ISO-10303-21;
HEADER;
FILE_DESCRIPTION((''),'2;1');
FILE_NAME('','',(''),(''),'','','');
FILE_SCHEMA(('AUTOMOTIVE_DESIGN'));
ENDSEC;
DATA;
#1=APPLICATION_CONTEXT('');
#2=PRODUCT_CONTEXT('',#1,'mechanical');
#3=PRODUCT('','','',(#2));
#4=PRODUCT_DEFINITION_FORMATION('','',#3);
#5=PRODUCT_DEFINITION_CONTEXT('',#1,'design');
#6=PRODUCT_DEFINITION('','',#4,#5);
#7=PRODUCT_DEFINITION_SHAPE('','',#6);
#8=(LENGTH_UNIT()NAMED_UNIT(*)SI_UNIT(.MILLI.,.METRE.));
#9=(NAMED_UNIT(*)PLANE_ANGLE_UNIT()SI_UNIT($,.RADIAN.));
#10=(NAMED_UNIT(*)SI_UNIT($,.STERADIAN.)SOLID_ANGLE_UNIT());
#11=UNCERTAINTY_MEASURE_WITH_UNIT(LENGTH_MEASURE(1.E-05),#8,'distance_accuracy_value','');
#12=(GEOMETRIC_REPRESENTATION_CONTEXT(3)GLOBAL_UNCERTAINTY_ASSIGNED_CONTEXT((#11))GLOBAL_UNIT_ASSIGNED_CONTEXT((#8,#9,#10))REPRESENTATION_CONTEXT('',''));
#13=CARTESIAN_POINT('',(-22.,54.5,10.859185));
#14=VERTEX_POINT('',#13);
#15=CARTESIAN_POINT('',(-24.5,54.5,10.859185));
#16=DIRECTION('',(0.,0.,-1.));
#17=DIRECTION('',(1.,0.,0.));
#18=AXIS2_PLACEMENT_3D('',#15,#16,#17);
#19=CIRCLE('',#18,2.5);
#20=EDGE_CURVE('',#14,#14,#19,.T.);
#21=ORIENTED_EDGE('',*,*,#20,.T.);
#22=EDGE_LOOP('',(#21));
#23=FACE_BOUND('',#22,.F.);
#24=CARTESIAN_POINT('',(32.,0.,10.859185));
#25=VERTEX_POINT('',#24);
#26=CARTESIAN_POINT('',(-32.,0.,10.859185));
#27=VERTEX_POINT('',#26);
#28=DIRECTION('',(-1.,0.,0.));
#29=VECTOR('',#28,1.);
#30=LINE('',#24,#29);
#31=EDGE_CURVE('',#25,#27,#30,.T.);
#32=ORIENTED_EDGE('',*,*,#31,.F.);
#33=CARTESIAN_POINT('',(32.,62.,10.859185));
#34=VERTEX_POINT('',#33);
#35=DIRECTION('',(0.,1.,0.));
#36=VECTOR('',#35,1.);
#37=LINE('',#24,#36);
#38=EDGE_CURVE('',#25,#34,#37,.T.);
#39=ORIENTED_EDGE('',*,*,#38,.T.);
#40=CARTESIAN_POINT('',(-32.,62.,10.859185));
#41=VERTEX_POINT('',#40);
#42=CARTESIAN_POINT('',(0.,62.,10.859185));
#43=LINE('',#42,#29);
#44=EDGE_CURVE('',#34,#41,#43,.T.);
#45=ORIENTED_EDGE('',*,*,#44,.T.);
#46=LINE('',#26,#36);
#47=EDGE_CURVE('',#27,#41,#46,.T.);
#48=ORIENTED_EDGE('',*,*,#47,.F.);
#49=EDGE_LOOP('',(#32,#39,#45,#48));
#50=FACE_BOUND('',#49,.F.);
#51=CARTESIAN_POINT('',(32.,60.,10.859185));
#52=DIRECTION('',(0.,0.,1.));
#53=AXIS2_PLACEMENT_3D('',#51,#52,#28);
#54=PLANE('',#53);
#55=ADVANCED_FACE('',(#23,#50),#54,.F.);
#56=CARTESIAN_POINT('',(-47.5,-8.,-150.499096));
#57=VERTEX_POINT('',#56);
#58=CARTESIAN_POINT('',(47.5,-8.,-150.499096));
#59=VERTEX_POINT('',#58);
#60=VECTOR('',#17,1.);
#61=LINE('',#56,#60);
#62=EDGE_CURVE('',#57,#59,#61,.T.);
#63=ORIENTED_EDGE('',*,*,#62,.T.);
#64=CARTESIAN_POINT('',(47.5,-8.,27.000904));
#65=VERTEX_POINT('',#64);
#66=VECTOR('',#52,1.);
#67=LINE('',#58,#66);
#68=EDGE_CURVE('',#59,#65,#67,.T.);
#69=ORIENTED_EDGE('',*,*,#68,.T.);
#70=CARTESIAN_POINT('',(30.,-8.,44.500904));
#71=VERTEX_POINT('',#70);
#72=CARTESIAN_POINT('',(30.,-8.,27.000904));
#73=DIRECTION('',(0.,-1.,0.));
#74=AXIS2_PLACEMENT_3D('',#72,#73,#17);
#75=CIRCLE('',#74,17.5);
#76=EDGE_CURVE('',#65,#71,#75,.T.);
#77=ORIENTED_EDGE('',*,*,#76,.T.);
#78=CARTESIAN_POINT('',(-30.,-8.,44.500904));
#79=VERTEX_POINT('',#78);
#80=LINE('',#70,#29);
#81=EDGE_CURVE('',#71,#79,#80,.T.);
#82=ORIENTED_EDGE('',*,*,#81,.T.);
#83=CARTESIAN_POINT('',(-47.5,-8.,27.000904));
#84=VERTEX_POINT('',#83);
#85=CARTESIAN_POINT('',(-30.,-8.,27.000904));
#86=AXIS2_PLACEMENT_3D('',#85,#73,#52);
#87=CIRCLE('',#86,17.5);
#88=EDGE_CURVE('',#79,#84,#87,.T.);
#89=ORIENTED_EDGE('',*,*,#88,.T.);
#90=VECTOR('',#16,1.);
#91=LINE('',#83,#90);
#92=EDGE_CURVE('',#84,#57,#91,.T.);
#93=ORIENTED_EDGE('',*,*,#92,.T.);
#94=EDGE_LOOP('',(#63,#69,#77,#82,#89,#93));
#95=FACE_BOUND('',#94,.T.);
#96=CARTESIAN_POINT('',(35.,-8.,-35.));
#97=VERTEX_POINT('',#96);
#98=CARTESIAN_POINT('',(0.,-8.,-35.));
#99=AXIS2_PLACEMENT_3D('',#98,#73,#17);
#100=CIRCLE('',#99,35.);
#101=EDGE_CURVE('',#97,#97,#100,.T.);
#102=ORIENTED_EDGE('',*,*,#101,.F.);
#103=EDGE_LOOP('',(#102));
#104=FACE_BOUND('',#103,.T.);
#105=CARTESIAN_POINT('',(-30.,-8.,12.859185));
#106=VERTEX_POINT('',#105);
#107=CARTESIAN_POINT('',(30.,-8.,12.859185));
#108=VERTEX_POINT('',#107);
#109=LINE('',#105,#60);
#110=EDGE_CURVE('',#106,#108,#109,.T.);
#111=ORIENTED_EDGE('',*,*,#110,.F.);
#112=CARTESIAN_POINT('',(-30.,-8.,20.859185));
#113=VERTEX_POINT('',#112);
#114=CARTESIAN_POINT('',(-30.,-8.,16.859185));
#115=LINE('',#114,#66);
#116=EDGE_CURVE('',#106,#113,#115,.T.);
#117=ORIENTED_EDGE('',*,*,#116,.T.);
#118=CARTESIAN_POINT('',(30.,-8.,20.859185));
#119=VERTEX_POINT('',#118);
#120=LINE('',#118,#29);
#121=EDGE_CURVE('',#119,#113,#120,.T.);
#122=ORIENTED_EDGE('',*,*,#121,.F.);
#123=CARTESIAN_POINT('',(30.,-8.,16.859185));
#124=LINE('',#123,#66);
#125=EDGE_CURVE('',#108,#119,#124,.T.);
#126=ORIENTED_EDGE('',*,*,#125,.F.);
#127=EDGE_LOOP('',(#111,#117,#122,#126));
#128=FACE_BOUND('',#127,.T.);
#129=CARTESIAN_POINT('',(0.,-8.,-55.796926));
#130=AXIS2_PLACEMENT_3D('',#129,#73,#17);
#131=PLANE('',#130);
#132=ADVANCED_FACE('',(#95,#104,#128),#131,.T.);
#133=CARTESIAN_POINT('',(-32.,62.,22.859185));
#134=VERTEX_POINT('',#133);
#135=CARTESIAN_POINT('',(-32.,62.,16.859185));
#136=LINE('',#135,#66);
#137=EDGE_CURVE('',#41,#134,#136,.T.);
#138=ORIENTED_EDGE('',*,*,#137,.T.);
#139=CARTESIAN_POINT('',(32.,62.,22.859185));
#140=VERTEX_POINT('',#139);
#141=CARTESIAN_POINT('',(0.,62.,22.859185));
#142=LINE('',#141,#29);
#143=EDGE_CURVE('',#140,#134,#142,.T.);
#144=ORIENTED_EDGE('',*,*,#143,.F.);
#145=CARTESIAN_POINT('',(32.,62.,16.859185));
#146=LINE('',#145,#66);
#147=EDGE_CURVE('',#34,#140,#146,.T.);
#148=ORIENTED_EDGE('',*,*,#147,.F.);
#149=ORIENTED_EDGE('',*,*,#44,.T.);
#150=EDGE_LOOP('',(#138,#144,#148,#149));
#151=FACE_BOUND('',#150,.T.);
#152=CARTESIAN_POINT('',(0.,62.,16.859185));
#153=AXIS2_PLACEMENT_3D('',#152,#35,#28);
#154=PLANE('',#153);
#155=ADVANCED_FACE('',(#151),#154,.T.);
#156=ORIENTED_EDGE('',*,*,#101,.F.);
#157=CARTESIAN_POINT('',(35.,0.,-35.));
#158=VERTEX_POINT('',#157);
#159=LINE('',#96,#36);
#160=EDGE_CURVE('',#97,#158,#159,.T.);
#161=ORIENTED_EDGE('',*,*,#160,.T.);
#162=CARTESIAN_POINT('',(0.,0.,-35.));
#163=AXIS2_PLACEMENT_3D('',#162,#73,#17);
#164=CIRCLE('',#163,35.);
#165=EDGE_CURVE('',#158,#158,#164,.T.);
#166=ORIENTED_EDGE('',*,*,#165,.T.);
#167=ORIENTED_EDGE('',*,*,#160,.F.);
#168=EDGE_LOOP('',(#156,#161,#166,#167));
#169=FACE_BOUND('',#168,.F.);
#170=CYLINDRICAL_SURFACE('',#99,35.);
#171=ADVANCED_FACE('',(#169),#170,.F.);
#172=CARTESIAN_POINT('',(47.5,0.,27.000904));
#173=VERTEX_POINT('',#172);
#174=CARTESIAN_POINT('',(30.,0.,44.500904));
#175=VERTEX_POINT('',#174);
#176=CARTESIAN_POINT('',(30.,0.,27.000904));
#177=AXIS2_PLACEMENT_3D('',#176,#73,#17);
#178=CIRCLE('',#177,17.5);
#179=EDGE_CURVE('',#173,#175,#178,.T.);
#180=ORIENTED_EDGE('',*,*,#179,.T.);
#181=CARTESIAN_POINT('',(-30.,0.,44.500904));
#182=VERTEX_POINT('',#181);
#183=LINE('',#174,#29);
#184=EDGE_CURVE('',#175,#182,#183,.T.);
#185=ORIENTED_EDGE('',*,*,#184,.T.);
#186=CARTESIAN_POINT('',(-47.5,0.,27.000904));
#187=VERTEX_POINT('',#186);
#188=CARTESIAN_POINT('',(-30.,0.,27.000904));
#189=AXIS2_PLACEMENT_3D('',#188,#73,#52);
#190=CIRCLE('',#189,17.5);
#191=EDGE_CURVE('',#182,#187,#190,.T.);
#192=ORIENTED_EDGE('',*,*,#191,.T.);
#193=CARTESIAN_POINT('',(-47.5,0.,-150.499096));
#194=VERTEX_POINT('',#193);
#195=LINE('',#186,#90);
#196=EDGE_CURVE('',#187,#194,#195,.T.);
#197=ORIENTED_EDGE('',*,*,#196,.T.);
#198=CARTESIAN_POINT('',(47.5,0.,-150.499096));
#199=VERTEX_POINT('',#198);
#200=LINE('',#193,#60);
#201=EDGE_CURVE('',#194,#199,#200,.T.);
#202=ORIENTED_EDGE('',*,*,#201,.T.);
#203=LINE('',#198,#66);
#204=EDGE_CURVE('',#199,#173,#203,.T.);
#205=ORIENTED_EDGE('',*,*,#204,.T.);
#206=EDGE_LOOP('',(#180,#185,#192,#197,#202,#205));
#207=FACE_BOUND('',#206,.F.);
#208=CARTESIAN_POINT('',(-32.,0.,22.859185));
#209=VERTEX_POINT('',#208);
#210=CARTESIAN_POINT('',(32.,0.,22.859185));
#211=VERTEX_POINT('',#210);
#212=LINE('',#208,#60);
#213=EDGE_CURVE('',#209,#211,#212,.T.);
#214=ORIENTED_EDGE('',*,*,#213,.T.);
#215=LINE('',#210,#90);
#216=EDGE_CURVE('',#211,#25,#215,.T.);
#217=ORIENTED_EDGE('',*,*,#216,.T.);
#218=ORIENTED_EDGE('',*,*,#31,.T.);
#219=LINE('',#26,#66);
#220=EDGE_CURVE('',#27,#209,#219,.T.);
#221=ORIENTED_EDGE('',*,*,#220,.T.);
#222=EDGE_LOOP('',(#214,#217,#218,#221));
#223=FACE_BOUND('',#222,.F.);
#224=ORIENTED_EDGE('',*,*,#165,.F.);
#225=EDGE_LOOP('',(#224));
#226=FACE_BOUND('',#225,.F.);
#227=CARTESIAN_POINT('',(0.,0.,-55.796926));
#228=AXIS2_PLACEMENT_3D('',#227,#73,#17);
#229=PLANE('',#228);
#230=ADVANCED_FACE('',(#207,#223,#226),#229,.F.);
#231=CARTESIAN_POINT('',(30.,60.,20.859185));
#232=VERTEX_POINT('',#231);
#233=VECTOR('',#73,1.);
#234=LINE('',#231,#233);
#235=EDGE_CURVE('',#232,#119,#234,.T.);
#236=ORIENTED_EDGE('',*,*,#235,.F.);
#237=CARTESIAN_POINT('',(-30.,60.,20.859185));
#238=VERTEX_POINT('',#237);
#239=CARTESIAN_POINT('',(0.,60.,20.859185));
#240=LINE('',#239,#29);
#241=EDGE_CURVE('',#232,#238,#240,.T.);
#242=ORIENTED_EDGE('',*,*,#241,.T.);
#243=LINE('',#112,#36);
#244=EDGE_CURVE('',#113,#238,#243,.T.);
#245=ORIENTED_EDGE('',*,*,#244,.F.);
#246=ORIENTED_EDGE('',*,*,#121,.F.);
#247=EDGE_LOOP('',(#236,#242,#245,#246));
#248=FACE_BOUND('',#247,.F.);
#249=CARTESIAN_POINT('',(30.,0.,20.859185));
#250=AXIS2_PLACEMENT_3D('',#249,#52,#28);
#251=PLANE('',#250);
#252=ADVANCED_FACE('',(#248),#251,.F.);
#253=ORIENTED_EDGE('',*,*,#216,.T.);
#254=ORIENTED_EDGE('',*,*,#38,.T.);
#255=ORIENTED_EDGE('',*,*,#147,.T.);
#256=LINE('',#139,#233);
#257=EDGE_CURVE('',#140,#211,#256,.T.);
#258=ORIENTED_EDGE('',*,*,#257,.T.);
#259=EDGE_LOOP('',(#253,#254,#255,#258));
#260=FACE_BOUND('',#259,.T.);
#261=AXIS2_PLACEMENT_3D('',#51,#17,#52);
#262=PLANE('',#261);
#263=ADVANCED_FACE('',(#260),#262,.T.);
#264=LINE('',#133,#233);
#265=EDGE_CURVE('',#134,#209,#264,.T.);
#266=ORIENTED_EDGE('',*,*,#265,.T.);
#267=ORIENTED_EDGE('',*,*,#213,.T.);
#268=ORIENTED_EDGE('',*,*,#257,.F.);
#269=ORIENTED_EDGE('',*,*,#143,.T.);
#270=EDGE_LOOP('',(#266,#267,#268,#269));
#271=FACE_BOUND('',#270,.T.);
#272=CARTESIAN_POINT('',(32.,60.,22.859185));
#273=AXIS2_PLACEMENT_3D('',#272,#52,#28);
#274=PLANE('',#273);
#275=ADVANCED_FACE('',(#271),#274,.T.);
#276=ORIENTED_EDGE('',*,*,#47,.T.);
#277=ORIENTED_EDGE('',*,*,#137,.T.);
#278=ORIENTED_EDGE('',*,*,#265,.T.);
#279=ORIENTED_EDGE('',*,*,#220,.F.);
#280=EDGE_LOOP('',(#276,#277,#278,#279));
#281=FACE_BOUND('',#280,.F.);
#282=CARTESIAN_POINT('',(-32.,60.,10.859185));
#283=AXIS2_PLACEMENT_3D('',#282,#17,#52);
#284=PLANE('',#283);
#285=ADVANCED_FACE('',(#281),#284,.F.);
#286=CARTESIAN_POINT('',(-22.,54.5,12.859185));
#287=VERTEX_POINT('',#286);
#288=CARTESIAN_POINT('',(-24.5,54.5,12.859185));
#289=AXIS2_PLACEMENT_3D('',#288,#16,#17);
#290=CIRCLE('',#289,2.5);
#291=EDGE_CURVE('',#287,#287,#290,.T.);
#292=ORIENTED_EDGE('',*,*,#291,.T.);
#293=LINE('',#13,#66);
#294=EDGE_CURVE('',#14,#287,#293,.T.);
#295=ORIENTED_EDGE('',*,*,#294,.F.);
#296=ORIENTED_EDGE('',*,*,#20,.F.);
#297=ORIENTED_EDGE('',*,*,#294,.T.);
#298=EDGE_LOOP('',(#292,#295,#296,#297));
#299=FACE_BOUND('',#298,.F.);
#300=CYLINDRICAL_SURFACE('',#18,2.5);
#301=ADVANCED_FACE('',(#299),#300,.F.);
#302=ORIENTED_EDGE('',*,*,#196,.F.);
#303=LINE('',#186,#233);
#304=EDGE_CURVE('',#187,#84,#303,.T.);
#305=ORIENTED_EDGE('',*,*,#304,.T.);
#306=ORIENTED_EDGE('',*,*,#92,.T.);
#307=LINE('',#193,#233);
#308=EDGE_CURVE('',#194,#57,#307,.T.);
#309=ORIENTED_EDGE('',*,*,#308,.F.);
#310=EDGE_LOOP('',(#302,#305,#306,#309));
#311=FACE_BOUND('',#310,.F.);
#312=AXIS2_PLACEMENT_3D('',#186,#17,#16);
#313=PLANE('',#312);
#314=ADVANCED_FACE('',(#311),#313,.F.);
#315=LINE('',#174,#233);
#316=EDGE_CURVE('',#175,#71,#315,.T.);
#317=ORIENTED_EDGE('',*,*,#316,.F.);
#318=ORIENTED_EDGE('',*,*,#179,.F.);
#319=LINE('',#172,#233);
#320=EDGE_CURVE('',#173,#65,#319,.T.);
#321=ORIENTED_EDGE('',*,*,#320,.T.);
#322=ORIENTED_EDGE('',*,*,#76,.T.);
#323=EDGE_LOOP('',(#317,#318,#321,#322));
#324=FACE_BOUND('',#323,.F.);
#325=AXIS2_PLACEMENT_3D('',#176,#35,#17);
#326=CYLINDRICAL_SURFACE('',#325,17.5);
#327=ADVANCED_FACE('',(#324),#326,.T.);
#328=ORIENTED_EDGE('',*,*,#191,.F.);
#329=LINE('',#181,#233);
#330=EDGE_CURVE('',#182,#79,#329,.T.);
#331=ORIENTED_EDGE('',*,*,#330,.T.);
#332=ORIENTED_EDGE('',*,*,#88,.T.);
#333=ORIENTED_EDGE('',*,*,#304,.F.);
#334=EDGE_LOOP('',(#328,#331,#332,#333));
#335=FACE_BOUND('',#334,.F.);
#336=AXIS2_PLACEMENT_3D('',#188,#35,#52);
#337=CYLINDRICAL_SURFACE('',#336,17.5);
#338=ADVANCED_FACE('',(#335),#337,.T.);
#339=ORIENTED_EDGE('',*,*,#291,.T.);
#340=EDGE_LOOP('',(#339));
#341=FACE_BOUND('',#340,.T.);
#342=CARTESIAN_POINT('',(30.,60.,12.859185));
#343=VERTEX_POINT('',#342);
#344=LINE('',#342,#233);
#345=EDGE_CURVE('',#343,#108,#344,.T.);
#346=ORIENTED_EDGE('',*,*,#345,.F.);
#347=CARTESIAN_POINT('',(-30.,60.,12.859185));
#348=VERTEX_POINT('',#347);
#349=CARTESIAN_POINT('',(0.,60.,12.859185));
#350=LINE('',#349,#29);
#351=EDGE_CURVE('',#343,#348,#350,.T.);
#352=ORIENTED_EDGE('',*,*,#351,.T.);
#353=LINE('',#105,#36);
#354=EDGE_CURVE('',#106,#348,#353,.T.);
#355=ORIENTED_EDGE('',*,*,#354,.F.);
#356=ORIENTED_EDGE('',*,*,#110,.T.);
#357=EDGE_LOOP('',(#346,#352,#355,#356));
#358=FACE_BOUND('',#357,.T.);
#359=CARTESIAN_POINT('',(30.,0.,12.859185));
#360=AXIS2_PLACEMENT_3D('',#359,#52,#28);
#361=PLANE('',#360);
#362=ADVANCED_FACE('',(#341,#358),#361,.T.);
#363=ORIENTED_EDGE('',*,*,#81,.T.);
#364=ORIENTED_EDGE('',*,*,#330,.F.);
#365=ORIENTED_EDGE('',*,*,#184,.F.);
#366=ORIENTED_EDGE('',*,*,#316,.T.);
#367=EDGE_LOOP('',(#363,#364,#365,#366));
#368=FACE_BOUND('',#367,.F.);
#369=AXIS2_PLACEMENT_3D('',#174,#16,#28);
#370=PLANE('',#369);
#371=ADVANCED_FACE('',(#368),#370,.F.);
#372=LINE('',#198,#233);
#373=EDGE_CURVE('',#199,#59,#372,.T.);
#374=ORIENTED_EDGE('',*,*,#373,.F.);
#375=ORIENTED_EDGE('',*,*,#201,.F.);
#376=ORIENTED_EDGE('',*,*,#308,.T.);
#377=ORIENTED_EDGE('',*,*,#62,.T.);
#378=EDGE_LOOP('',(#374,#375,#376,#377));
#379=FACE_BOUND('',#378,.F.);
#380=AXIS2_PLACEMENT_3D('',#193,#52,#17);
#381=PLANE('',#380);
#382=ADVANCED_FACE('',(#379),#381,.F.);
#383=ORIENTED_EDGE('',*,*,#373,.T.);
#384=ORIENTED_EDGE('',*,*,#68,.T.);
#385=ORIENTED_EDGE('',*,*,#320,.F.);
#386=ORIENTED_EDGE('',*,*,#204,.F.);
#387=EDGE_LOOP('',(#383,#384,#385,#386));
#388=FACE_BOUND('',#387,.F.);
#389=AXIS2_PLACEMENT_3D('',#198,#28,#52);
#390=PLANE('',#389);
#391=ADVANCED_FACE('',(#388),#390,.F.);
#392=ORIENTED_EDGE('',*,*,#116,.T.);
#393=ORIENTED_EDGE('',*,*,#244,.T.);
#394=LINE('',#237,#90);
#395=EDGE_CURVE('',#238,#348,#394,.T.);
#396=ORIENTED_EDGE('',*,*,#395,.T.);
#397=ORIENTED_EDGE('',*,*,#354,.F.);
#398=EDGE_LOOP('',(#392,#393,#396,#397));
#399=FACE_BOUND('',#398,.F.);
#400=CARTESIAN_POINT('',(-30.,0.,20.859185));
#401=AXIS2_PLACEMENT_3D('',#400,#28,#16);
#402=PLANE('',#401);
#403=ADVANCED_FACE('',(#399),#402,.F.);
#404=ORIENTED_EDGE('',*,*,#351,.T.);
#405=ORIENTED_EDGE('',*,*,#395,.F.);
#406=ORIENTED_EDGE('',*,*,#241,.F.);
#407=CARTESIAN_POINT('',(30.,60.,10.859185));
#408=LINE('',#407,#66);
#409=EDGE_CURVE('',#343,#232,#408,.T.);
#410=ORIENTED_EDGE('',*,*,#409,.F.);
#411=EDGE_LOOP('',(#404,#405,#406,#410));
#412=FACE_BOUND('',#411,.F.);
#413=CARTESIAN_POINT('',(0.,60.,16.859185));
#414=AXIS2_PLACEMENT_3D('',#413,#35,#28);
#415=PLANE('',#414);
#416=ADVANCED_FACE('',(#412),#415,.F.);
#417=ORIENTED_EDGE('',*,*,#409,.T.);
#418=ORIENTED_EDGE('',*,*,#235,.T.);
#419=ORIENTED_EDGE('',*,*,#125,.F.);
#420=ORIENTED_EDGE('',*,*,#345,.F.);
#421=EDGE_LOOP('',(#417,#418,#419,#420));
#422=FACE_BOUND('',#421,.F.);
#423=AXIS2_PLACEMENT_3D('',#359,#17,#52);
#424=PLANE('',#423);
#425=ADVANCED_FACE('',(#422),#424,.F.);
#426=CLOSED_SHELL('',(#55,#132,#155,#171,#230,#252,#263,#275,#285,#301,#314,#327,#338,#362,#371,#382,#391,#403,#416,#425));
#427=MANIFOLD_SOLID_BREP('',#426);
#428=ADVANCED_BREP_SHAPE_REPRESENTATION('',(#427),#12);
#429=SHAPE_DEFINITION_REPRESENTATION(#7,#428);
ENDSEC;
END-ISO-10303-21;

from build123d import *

# Parameters (mm, degrees)
F1_DEPTH  = 8
F2_R      = 35
F3_DEPTH  = 10
F4_W      = 30
F4_H      = 8
F5_DEPTH  = 8
F6_W      = 60
F6_H      = 2
F7_DEPTH  = 60
F8_W      = 64
F8_H      = 12
F9_DEPTH  = 2
F10_R     = 2.5
F11_DEPTH = 4


# Not quite as in the source:
# - the program builds the solid bodies; features that only make, move or delete a surface that nothing else refers to are left out


with BuildPart() as f1:
    # F0 (on Front) → F1 (new body)
    with BuildSketch(Plane.XZ):
        with BuildLine():
            Line((30, 44.5009035608), (-30, 44.5009035608))
            ThreePointArc((-30, 44.5009035608), (-42.3743686708, 39.3752722315), (-47.5, 27.0009035608))
            Line((-47.5, 27.0009035608), (-47.5, -150.4990964392))
            Line((-47.5, -150.4990964392), (47.5, -150.4990964392))
            Line((47.5, -150.4990964392), (47.5, 27.0009035608))
            ThreePointArc((47.5, 27.0009035608), (42.3743686708, 39.3752722315), (30, 44.5009035608))
        make_face()
    extrude(amount=F1_DEPTH)

    # F2 (on face) → F3 (cut)
    with BuildSketch(Plane.XZ.offset(8)):
        with Locations((0, -35)):
            Circle(F2_R)
    extrude(amount=-F3_DEPTH, mode=Mode.SUBTRACT)

    # F4 (on face) → F5 (cut)
    with BuildSketch(Plane.XZ.offset(8)):
        with Locations((-15, 16.8591848421)):
            Rectangle(F4_W, F4_H)
        with Locations((15, 16.8591848421)):
            Rectangle(F4_W, F4_H)
    extrude(amount=-F5_DEPTH, mode=Mode.SUBTRACT)

    # F6 (on face) → F7 (join)
    with BuildSketch(Plane(origin=(0, 0, 0), x_dir=(-1, 0, 0), z_dir=(0, 1, 0))):
        with Locations((0, 21.8591848421)):
            Rectangle(F6_W, F6_H)
        Polygon((-30, 12.8591848421), (-30, 20.8591848421), (-30, 22.8591848421), (-32, 22.8591848421), (-32, 10.8591848421), (-30, 10.8591848421), align=None)
        Polygon((30, 22.8591848421), (30, 20.8591848421), (30, 12.8591848421), (30, 10.8591848421), (32, 10.8591848421), (32, 22.8591848421), align=None)
        with Locations((0, 11.8591848421)):
            Rectangle(F6_W, F6_H)
    extrude(amount=F7_DEPTH)

    # F8 (on face) → F9 (join)
    with BuildSketch(Plane(origin=(0, 60, 0), x_dir=(-1, 0, 0), z_dir=(0, 1, 0))):
        with Locations((0, 16.8591848421)):
            Rectangle(F8_W, F8_H)
    extrude(amount=F9_DEPTH)

    # F10 (on face) → F11 (cut)
    with BuildSketch(Plane(origin=(0, 0, 10.8591848421), x_dir=(1, 0, 0), z_dir=(0, 0, -1))):
        with Locations((-24.5, -54.5)):
            Circle(F10_R)
    extrude(amount=-F11_DEPTH, mode=Mode.SUBTRACT)


solid = f1.part
